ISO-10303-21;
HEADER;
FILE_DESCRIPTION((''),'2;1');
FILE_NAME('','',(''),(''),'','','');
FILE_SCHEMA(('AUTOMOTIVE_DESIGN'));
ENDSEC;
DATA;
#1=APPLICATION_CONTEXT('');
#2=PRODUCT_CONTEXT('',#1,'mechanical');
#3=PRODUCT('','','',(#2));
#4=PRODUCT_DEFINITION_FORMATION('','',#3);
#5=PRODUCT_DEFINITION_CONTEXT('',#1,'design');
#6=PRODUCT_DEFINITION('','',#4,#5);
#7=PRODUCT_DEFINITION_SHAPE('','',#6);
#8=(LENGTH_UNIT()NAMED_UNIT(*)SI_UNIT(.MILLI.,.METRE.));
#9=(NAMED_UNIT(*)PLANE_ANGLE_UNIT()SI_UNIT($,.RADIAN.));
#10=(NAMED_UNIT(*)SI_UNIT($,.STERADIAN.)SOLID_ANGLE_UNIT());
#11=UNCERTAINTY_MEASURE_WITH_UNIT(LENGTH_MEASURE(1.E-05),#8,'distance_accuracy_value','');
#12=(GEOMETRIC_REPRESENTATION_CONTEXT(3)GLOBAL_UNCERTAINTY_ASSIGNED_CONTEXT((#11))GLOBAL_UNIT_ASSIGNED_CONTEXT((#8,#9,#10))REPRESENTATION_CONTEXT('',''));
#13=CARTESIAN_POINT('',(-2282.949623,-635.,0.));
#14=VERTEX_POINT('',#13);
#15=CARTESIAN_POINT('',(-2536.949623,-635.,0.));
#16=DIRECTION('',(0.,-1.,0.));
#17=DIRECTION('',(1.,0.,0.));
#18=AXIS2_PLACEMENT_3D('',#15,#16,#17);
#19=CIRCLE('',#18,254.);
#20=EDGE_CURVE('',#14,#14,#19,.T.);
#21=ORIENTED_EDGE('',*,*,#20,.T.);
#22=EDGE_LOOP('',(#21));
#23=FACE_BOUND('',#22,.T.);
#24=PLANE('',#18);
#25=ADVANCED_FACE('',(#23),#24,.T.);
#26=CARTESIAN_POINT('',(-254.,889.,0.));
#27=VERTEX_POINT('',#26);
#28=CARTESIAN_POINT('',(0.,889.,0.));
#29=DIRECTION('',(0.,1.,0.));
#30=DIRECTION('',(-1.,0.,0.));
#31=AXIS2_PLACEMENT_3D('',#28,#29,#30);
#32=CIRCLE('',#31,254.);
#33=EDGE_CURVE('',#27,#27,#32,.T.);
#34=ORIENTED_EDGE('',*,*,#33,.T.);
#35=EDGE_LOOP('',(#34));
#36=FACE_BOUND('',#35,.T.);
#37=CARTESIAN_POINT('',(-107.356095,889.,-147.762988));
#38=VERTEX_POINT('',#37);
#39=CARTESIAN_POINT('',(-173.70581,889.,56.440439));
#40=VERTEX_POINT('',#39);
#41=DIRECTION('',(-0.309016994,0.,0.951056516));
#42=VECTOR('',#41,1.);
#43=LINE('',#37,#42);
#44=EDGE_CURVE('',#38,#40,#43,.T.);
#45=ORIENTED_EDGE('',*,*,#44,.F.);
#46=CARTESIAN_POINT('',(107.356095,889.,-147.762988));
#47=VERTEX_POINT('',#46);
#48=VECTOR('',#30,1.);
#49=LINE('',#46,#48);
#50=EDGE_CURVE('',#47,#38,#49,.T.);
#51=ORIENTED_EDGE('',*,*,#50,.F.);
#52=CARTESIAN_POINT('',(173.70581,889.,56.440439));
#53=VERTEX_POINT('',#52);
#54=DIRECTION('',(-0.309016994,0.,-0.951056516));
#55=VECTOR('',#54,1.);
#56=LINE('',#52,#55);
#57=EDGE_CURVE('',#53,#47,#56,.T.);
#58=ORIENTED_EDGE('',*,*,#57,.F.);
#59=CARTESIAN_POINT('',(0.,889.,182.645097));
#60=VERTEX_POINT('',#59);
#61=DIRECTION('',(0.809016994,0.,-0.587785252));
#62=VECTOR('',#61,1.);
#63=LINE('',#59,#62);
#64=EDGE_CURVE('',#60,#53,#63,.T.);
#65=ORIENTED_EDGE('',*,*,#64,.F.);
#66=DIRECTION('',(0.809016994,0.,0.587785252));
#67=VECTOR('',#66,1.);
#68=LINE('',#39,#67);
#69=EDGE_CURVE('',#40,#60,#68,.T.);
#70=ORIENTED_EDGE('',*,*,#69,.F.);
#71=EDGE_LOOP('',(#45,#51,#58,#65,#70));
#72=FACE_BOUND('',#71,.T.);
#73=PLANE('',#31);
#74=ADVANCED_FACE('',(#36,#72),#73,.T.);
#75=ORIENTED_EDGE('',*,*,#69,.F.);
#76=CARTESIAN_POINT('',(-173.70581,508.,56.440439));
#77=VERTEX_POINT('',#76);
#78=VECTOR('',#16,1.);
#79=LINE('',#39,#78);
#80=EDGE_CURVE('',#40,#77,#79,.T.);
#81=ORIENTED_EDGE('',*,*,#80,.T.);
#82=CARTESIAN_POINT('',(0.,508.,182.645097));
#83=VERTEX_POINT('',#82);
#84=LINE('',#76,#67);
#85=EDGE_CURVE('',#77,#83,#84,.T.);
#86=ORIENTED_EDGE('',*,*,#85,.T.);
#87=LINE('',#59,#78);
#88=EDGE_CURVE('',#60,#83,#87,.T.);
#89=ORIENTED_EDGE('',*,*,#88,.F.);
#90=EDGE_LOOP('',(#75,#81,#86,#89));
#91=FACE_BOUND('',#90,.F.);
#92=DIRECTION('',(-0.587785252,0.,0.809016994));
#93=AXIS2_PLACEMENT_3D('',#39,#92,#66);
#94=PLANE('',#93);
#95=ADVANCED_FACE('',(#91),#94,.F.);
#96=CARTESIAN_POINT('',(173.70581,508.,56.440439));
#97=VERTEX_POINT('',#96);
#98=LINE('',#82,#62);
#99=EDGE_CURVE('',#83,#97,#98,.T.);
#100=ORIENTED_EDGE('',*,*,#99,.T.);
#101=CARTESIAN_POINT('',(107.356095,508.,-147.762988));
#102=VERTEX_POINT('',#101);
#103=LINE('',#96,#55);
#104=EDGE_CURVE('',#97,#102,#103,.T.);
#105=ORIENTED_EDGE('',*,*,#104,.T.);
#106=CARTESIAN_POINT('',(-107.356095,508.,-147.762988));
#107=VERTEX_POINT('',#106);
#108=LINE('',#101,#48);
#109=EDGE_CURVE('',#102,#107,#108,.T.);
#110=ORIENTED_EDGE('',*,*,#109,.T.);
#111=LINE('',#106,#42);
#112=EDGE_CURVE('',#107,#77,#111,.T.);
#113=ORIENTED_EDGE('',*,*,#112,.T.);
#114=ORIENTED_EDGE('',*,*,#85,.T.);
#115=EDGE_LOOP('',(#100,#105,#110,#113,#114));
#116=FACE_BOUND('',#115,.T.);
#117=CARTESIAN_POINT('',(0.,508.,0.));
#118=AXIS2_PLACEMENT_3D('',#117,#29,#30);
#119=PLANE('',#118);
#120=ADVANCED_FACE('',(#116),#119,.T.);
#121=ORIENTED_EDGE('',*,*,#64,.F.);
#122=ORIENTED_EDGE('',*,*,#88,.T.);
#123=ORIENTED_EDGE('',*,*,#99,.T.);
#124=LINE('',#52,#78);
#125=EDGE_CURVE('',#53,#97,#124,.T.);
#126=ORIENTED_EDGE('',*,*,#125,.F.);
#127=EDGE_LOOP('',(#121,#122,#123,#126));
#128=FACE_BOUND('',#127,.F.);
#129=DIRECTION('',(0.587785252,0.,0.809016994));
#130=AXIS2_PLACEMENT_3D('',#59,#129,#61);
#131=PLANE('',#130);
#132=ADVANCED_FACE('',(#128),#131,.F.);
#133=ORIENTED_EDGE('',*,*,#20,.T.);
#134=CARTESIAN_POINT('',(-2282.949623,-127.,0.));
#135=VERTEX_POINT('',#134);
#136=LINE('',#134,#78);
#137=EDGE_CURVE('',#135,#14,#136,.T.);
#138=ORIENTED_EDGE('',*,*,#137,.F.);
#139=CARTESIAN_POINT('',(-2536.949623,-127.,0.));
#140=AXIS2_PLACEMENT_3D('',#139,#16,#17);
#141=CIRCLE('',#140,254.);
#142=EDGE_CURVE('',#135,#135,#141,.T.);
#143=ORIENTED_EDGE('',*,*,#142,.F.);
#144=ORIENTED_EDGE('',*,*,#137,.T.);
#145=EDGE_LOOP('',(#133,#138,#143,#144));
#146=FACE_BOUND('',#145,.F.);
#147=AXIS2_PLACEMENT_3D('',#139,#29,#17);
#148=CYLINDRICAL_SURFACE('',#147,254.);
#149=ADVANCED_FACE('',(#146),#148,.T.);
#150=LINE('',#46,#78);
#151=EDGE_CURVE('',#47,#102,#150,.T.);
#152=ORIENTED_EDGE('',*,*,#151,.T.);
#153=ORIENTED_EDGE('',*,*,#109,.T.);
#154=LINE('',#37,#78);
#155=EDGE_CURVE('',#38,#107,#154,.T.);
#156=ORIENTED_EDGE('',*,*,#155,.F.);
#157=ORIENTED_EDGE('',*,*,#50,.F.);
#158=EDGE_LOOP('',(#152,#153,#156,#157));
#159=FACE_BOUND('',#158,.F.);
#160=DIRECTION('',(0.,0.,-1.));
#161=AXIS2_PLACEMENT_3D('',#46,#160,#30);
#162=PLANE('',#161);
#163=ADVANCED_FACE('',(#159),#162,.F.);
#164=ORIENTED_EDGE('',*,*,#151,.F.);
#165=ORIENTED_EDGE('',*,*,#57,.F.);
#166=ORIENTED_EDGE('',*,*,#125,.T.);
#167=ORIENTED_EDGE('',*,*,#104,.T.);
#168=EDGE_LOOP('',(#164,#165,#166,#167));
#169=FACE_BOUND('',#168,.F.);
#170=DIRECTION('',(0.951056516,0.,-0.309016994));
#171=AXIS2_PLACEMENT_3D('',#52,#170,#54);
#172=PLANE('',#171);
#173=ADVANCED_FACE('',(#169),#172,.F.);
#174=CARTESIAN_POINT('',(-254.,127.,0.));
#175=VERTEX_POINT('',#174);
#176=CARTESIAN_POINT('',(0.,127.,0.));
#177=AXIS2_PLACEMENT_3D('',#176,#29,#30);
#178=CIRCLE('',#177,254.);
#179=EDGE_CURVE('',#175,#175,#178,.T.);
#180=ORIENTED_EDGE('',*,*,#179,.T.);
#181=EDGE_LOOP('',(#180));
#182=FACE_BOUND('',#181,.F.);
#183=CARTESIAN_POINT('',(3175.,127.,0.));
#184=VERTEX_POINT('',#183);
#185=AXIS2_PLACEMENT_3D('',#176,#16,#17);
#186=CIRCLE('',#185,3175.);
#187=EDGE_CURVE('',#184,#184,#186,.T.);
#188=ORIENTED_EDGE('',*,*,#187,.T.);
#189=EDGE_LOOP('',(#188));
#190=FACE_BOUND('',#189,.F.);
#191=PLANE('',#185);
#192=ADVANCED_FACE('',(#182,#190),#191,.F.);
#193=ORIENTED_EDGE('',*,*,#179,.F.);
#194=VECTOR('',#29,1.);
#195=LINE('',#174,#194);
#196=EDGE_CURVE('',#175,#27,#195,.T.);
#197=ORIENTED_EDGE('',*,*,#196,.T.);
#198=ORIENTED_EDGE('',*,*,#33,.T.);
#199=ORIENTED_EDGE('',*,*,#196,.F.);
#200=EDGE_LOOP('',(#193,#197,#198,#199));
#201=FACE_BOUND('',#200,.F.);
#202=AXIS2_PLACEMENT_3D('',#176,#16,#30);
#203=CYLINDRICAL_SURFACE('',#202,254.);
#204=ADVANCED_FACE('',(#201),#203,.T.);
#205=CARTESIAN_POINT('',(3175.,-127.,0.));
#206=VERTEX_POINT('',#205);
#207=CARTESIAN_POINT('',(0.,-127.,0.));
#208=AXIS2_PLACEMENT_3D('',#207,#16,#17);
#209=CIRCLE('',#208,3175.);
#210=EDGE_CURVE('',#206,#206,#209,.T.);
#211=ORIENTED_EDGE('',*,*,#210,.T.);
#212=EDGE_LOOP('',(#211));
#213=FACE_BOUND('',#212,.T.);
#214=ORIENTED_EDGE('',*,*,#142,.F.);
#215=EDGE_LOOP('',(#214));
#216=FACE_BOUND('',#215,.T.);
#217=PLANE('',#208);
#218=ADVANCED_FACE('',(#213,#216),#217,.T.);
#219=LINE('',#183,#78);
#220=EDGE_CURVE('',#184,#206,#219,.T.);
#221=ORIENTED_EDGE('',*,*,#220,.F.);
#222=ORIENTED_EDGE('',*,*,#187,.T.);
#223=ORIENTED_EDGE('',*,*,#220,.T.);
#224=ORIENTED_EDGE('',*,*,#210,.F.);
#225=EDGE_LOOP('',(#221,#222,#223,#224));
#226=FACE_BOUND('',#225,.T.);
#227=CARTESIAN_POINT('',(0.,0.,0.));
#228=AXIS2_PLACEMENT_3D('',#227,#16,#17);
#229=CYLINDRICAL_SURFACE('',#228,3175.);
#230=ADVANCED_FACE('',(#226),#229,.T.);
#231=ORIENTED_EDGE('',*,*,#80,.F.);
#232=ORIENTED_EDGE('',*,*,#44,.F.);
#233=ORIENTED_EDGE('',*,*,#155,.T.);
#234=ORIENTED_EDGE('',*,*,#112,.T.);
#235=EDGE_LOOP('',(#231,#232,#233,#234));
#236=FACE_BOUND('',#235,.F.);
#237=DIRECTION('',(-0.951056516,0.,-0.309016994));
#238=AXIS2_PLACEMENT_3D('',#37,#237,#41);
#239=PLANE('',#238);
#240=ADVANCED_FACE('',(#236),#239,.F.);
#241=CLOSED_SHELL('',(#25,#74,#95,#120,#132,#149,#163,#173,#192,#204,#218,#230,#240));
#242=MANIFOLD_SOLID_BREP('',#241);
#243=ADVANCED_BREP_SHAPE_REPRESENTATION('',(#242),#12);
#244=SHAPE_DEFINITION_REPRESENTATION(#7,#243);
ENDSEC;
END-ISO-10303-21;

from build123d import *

# Parameters (mm, degrees)
F0_R     = 3175
F1_DEPTH = 127
F2_R     = 254
F3_DEPTH = 508
F4_R     = 254
F5_DEPTH = 762
F7_DEPTH = 381


# Not quite as in the source:
# - a feature names something its author has since deleted; it is built from what else it names


with BuildPart() as f1:
    # F0 (on Front) → F1 (new body, symmetric)
    with BuildSketch(Plane.XZ):
        Circle(F0_R)
    extrude(amount=F1_DEPTH, both=True)

    # F2 (on face) → F3 (join)
    with BuildSketch(Plane.XZ.offset(127)):
        with Locations((-2536.9496234023, 0)):
            Circle(F2_R)
    extrude(amount=F3_DEPTH)

    # F4 (on face) → F5 (join)
    with BuildSketch(Plane(origin=(0, 127, 0), x_dir=(-1, 0, 0), z_dir=(0, 1, 0))):
        Circle(F4_R)
    extrude(amount=F5_DEPTH)

    # F6 (on face) → F7 (cut)
    with BuildSketch(Plane(origin=(0, 889, 0), x_dir=(-1, 0, 0), z_dir=(0, 1, 0))):
        Polygon((173.7058100278, 56.4404390281), (0, 182.6450973749), (-173.7058100278, 56.4404390281), (-107.3560946405, -147.7629877156), (107.3560946405, -147.7629877156), align=None)
    extrude(amount=-F7_DEPTH, mode=Mode.SUBTRACT)


solid = f1.part
